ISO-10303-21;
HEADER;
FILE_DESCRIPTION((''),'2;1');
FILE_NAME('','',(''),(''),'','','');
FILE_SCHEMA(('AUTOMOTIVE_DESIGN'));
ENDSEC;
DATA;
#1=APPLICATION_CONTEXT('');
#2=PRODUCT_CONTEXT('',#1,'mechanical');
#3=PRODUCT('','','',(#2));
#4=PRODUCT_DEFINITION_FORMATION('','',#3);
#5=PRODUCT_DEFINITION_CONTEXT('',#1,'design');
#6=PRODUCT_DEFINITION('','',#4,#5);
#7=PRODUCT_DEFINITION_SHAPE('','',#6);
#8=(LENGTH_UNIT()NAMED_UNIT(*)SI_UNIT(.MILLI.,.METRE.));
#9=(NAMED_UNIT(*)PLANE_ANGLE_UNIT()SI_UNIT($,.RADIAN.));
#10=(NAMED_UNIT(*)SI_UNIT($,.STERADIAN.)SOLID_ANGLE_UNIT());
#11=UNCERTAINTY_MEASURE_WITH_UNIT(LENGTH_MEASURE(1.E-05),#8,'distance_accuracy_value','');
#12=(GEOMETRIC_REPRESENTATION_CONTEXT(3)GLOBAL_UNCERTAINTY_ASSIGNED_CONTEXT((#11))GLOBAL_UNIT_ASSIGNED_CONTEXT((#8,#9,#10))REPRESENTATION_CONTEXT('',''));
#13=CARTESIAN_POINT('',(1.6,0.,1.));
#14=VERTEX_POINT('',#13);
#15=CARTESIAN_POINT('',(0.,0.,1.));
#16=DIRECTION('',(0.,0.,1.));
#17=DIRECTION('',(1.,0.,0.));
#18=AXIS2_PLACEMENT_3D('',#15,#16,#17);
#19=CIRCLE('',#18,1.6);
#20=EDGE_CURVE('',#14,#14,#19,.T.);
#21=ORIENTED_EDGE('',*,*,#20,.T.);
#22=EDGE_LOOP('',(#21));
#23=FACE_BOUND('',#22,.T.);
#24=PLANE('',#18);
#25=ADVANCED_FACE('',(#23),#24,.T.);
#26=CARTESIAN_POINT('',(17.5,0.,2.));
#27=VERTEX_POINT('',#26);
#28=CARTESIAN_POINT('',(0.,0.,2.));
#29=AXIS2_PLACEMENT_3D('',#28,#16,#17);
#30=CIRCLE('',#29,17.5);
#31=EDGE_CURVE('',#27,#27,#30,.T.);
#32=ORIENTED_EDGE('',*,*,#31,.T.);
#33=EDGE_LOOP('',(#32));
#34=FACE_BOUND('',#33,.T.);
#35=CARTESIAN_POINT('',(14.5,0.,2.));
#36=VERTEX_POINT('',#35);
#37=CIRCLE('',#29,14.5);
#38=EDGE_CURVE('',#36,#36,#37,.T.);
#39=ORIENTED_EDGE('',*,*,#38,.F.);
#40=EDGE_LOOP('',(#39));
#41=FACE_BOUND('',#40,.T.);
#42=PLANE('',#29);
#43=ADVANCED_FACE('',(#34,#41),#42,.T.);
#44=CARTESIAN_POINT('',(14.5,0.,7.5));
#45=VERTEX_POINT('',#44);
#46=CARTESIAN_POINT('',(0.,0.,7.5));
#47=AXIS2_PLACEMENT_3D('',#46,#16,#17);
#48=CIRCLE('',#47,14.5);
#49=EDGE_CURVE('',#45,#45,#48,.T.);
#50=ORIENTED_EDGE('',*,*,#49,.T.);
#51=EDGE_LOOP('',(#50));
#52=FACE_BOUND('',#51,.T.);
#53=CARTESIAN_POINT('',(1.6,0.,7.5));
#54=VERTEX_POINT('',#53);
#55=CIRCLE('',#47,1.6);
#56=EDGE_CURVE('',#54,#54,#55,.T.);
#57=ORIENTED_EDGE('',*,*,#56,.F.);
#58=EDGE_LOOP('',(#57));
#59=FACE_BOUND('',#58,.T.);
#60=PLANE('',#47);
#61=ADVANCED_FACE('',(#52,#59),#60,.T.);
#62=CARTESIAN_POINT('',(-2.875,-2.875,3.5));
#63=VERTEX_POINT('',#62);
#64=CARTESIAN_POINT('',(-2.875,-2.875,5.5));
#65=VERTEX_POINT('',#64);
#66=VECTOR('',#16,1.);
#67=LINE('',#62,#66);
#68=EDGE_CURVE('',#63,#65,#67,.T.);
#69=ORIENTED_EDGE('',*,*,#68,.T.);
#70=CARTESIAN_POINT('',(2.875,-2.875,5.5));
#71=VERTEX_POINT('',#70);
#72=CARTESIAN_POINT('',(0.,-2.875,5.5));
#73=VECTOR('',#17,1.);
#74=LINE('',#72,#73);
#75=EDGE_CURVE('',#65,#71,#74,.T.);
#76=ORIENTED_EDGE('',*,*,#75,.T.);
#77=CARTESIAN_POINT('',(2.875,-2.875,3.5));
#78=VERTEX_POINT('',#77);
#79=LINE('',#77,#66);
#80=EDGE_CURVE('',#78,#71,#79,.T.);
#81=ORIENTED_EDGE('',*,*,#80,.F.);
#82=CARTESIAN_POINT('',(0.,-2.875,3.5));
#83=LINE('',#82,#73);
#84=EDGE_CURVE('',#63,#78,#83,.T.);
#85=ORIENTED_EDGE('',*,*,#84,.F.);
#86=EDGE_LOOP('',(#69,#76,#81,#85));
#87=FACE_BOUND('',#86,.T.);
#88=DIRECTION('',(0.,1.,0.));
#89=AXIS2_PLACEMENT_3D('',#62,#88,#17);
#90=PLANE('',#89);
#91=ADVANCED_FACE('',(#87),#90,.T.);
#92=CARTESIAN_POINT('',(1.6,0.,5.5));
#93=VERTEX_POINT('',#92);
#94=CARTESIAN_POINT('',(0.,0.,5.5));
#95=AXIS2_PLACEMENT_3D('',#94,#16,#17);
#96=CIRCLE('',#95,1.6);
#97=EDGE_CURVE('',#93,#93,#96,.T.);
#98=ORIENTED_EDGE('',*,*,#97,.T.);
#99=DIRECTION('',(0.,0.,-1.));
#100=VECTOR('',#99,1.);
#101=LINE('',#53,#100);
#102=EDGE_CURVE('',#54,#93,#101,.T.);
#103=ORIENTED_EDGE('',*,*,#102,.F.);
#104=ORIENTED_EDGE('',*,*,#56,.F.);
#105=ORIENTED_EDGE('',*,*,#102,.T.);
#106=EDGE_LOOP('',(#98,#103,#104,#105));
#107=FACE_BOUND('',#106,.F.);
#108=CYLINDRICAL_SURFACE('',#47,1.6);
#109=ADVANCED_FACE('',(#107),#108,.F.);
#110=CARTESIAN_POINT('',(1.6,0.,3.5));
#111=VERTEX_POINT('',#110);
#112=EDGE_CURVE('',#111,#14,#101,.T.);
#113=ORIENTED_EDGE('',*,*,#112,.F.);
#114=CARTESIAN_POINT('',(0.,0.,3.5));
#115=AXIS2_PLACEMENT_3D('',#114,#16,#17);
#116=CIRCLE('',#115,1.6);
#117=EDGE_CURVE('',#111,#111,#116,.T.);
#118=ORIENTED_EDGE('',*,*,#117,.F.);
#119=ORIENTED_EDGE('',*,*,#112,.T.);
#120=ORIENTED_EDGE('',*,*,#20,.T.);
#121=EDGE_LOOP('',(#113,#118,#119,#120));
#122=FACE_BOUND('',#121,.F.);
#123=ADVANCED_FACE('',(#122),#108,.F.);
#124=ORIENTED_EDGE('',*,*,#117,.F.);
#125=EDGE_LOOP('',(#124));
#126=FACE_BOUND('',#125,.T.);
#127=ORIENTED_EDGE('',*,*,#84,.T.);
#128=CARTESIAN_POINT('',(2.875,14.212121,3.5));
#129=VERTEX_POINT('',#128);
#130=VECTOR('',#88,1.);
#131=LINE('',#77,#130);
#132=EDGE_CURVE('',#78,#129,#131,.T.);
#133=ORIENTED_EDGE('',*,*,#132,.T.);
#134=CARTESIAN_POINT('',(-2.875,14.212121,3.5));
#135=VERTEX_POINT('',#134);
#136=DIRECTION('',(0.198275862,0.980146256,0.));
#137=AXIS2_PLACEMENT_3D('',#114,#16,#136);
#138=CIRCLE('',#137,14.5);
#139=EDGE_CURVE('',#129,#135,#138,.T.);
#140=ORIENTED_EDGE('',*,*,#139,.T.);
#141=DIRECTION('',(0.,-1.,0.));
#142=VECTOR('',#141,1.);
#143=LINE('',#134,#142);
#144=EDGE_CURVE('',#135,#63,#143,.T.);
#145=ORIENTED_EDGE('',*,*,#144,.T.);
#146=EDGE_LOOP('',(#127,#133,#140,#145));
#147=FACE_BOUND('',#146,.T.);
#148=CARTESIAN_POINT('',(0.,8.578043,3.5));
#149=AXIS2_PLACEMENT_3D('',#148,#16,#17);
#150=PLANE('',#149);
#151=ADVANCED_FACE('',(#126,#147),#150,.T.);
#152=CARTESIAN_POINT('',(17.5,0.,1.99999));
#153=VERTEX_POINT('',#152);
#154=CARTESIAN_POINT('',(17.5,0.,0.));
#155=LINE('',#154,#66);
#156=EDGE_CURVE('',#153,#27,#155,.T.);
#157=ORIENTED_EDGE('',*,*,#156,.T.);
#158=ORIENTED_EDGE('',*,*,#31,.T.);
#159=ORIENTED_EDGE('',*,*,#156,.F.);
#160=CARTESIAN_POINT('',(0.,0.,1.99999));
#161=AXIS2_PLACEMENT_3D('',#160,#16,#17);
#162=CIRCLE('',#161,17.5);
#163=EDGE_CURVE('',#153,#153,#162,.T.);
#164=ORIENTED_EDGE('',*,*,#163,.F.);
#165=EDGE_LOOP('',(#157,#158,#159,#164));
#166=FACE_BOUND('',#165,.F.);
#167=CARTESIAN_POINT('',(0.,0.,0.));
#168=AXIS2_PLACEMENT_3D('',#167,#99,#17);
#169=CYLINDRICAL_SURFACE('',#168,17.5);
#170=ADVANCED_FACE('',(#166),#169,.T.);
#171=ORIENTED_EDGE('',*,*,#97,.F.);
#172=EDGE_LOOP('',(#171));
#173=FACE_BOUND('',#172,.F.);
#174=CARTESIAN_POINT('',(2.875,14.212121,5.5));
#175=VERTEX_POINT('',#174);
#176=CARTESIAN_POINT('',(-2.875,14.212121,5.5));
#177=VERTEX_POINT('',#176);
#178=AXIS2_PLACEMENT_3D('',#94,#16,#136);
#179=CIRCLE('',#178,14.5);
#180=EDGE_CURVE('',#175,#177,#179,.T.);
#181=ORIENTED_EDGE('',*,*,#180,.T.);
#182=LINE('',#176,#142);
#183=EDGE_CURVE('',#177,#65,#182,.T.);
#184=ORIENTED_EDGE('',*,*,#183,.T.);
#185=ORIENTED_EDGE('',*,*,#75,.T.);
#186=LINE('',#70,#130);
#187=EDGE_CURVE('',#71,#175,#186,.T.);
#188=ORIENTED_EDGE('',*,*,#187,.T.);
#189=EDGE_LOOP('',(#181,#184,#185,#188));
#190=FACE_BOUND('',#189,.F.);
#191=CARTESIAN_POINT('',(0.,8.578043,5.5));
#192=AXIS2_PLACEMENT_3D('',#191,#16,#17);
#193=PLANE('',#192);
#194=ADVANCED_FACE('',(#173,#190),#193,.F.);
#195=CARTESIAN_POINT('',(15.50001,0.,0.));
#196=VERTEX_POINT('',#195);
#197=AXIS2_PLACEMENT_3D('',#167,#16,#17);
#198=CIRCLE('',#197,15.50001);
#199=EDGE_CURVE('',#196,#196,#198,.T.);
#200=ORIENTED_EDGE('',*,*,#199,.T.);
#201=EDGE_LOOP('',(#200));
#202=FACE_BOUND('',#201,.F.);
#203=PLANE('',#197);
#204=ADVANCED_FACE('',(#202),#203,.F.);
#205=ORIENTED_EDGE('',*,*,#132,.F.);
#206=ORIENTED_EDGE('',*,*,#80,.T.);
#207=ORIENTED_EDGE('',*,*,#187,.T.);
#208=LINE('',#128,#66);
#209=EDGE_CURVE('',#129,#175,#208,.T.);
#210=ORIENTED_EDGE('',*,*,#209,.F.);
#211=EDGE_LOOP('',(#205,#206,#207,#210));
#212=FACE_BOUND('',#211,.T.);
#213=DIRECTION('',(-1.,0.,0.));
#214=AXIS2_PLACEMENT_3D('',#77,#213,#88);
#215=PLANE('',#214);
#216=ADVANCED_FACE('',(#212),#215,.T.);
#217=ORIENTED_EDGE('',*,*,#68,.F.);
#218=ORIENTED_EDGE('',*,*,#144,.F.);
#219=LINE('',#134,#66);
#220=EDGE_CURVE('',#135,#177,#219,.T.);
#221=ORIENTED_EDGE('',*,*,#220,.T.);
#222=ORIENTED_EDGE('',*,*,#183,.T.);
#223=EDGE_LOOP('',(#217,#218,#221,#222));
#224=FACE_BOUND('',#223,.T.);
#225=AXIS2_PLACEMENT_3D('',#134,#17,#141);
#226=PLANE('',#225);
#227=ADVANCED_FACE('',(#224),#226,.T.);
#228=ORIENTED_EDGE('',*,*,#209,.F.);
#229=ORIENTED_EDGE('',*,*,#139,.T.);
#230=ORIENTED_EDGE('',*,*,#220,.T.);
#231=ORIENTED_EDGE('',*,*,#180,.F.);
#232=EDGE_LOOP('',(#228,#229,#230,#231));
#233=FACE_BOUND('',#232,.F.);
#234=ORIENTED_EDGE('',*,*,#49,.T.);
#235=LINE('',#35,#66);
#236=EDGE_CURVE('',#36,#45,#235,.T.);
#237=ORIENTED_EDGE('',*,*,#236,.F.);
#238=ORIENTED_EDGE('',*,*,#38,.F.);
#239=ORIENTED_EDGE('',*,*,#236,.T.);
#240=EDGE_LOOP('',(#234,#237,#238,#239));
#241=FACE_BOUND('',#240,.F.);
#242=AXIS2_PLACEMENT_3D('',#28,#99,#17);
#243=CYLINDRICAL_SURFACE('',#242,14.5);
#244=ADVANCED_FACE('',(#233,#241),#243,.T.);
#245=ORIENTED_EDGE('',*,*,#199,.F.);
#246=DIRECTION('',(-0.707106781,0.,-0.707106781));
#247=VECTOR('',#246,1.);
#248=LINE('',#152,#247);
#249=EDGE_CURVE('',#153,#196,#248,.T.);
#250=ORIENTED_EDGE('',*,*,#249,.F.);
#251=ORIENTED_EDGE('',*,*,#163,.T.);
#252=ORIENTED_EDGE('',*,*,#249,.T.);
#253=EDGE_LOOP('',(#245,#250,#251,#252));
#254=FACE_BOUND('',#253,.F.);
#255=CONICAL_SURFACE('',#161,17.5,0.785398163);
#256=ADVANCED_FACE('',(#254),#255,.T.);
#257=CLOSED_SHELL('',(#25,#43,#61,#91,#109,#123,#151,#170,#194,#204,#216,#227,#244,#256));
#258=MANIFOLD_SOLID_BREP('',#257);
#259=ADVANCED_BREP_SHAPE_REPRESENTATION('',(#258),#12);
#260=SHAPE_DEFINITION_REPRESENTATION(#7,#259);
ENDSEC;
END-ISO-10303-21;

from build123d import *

# Parameters (mm, degrees)
F0_R     = 17.5
F1_DEPTH = 2
F2_R     = 14.5
F3_DEPTH = 5.5
F4_W     = 5.75
F4_H     = 5.75
F5_DEPTH = 2
F8_R     = 1.6
F9_DEPTH = 6.5
F10_SIZE = 1.99999


# Not quite as in the source:
# - a fillet or chamfer is up to 0.001 mm smaller than in the source, because OpenCascade refuses the exact size


with BuildPart() as f1:
    # F0 (on Top) → F1 (new body)
    with BuildSketch(Plane.XY):
        Circle(F0_R)
    extrude(amount=F1_DEPTH)

    # F2 (on face) → F3 (join)
    with BuildSketch(Plane.XY.offset(2)):
        Circle(F2_R)
    extrude(amount=F3_DEPTH)


with BuildPart() as f5:
    # F4 (on face) → F5 (new body)
    with BuildSketch(Plane.XY.offset(7.5)):
        with BuildLine():
            Line((-2.875, 2.875), (2.875, 2.875))
            Line((2.875, 2.875), (2.875, 14.2121207073))
            ThreePointArc((2.875, 14.2121207073), (0, 14.5), (-2.875, 14.2121207073))
            Line((-2.875, 14.2121207073), (-2.875, 2.875))
        make_face()
        Rectangle(F4_W, F4_H)
    extrude(amount=F5_DEPTH)


with BuildPart() as f5_1:
    # F6: moved
    add(f5.part.moved(Location((0, 0, -4))))


with BuildPart() as f1_1:
    add(f1.part)

    # F7: cut F5
    add(f5_1.part, mode=Mode.SUBTRACT)

    # F8 (on face) → F9 (cut)
    with BuildSketch(Plane.XY.offset(7.5)):
        Circle(F8_R)
    extrude(amount=-F9_DEPTH, mode=Mode.SUBTRACT)

    # F10 (size 2 in the source; OpenCascade refuses exactly that, so slightly less here)
    f10_edges = [f1_1.edges().sort_by_distance(p)[0] for p in [
        (-17.5, 0, 0),
    ]]
    chamfer(f10_edges, length=F10_SIZE)


solid = f1_1.part
